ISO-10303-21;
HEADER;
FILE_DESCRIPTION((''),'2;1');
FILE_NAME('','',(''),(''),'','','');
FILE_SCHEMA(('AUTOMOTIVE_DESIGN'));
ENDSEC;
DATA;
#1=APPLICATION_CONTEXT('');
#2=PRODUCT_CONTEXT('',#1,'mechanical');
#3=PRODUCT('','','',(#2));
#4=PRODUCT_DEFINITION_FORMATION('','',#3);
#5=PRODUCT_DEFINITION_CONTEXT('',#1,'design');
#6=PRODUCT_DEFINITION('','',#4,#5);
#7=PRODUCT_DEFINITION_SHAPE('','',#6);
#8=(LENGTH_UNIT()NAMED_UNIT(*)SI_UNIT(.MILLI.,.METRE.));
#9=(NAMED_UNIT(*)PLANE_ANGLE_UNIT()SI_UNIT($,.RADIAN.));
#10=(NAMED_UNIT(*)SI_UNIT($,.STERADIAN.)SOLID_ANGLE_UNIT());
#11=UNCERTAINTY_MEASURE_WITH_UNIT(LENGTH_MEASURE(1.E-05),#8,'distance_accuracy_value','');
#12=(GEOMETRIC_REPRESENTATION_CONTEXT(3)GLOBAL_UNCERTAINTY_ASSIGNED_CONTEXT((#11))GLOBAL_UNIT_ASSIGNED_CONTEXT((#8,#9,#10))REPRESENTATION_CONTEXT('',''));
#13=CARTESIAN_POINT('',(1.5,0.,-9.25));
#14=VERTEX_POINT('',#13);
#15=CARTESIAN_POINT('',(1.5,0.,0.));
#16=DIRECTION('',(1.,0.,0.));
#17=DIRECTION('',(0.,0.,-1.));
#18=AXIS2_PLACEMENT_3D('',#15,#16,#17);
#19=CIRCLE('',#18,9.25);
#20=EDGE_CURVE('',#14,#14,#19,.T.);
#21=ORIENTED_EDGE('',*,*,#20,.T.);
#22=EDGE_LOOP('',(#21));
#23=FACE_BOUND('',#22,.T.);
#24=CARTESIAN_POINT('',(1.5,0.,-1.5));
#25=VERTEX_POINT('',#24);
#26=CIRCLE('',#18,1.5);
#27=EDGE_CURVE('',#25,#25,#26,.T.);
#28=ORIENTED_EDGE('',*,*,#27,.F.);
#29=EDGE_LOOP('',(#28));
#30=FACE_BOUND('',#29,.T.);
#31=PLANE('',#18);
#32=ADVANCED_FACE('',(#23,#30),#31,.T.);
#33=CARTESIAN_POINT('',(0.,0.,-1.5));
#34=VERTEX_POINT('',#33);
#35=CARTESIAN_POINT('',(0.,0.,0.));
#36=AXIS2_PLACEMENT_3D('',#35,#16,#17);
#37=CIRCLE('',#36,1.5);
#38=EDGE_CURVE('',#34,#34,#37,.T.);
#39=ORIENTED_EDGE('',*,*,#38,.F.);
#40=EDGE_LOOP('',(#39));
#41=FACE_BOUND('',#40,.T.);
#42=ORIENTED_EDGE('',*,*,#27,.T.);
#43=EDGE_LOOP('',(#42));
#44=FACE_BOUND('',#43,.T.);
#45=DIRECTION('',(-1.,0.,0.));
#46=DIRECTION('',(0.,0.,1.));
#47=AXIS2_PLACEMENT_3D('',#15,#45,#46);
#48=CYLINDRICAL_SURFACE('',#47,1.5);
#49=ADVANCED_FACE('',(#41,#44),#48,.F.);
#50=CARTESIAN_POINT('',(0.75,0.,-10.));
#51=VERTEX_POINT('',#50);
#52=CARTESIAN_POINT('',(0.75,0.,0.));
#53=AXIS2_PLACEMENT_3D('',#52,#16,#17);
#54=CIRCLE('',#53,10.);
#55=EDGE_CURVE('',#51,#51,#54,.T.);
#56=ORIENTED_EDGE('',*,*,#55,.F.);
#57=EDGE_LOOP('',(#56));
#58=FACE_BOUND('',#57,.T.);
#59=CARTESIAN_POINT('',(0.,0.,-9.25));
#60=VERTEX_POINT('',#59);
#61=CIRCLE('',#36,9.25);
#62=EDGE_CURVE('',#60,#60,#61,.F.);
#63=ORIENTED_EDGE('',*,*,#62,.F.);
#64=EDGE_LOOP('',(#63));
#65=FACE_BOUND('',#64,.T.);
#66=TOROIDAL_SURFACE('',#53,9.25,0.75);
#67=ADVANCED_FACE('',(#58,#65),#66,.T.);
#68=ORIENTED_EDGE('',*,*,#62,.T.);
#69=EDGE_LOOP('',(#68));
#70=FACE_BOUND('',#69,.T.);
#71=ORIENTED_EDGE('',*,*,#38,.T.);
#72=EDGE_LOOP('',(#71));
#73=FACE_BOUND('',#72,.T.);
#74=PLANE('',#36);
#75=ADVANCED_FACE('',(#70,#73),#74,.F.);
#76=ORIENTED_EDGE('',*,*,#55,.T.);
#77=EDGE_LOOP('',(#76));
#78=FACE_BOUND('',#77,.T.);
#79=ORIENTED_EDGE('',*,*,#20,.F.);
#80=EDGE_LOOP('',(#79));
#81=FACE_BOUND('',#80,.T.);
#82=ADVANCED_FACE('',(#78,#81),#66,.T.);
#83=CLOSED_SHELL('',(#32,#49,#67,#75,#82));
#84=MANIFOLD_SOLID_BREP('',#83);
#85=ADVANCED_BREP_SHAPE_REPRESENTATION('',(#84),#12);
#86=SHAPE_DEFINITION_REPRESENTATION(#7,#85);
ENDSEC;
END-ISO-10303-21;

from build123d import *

# Parameters (mm, degrees)
SKETCH1_R           = 10
SKETCH1_R_2         = 1.5
BOSS_EXTRUDE1_DEPTH = 1.5
FILLET1_R           = 0.75


with BuildPart() as part:
    # Sketch1 → Boss-Extrude1 (new body)
    with BuildSketch(Plane.YZ):
        with Locations(Location((0, 0, 0), (0, 0, 270))):
            Circle(SKETCH1_R)
        with Locations(Location((0, 0, 0), (0, 0, 270))):
            Circle(SKETCH1_R_2, mode=Mode.SUBTRACT)
    extrude(amount=BOSS_EXTRUDE1_DEPTH)

    # Fillet1
    fillet1_edges = [part.edges().sort_by_distance(p)[0] for p in [
        (0, 0, 10),
        (1.5, 0, 10),
    ]]
    fillet(fillet1_edges, radius=FILLET1_R - 0.0001)  # a hair under: the kernel refuses the full size


solid = part.part
